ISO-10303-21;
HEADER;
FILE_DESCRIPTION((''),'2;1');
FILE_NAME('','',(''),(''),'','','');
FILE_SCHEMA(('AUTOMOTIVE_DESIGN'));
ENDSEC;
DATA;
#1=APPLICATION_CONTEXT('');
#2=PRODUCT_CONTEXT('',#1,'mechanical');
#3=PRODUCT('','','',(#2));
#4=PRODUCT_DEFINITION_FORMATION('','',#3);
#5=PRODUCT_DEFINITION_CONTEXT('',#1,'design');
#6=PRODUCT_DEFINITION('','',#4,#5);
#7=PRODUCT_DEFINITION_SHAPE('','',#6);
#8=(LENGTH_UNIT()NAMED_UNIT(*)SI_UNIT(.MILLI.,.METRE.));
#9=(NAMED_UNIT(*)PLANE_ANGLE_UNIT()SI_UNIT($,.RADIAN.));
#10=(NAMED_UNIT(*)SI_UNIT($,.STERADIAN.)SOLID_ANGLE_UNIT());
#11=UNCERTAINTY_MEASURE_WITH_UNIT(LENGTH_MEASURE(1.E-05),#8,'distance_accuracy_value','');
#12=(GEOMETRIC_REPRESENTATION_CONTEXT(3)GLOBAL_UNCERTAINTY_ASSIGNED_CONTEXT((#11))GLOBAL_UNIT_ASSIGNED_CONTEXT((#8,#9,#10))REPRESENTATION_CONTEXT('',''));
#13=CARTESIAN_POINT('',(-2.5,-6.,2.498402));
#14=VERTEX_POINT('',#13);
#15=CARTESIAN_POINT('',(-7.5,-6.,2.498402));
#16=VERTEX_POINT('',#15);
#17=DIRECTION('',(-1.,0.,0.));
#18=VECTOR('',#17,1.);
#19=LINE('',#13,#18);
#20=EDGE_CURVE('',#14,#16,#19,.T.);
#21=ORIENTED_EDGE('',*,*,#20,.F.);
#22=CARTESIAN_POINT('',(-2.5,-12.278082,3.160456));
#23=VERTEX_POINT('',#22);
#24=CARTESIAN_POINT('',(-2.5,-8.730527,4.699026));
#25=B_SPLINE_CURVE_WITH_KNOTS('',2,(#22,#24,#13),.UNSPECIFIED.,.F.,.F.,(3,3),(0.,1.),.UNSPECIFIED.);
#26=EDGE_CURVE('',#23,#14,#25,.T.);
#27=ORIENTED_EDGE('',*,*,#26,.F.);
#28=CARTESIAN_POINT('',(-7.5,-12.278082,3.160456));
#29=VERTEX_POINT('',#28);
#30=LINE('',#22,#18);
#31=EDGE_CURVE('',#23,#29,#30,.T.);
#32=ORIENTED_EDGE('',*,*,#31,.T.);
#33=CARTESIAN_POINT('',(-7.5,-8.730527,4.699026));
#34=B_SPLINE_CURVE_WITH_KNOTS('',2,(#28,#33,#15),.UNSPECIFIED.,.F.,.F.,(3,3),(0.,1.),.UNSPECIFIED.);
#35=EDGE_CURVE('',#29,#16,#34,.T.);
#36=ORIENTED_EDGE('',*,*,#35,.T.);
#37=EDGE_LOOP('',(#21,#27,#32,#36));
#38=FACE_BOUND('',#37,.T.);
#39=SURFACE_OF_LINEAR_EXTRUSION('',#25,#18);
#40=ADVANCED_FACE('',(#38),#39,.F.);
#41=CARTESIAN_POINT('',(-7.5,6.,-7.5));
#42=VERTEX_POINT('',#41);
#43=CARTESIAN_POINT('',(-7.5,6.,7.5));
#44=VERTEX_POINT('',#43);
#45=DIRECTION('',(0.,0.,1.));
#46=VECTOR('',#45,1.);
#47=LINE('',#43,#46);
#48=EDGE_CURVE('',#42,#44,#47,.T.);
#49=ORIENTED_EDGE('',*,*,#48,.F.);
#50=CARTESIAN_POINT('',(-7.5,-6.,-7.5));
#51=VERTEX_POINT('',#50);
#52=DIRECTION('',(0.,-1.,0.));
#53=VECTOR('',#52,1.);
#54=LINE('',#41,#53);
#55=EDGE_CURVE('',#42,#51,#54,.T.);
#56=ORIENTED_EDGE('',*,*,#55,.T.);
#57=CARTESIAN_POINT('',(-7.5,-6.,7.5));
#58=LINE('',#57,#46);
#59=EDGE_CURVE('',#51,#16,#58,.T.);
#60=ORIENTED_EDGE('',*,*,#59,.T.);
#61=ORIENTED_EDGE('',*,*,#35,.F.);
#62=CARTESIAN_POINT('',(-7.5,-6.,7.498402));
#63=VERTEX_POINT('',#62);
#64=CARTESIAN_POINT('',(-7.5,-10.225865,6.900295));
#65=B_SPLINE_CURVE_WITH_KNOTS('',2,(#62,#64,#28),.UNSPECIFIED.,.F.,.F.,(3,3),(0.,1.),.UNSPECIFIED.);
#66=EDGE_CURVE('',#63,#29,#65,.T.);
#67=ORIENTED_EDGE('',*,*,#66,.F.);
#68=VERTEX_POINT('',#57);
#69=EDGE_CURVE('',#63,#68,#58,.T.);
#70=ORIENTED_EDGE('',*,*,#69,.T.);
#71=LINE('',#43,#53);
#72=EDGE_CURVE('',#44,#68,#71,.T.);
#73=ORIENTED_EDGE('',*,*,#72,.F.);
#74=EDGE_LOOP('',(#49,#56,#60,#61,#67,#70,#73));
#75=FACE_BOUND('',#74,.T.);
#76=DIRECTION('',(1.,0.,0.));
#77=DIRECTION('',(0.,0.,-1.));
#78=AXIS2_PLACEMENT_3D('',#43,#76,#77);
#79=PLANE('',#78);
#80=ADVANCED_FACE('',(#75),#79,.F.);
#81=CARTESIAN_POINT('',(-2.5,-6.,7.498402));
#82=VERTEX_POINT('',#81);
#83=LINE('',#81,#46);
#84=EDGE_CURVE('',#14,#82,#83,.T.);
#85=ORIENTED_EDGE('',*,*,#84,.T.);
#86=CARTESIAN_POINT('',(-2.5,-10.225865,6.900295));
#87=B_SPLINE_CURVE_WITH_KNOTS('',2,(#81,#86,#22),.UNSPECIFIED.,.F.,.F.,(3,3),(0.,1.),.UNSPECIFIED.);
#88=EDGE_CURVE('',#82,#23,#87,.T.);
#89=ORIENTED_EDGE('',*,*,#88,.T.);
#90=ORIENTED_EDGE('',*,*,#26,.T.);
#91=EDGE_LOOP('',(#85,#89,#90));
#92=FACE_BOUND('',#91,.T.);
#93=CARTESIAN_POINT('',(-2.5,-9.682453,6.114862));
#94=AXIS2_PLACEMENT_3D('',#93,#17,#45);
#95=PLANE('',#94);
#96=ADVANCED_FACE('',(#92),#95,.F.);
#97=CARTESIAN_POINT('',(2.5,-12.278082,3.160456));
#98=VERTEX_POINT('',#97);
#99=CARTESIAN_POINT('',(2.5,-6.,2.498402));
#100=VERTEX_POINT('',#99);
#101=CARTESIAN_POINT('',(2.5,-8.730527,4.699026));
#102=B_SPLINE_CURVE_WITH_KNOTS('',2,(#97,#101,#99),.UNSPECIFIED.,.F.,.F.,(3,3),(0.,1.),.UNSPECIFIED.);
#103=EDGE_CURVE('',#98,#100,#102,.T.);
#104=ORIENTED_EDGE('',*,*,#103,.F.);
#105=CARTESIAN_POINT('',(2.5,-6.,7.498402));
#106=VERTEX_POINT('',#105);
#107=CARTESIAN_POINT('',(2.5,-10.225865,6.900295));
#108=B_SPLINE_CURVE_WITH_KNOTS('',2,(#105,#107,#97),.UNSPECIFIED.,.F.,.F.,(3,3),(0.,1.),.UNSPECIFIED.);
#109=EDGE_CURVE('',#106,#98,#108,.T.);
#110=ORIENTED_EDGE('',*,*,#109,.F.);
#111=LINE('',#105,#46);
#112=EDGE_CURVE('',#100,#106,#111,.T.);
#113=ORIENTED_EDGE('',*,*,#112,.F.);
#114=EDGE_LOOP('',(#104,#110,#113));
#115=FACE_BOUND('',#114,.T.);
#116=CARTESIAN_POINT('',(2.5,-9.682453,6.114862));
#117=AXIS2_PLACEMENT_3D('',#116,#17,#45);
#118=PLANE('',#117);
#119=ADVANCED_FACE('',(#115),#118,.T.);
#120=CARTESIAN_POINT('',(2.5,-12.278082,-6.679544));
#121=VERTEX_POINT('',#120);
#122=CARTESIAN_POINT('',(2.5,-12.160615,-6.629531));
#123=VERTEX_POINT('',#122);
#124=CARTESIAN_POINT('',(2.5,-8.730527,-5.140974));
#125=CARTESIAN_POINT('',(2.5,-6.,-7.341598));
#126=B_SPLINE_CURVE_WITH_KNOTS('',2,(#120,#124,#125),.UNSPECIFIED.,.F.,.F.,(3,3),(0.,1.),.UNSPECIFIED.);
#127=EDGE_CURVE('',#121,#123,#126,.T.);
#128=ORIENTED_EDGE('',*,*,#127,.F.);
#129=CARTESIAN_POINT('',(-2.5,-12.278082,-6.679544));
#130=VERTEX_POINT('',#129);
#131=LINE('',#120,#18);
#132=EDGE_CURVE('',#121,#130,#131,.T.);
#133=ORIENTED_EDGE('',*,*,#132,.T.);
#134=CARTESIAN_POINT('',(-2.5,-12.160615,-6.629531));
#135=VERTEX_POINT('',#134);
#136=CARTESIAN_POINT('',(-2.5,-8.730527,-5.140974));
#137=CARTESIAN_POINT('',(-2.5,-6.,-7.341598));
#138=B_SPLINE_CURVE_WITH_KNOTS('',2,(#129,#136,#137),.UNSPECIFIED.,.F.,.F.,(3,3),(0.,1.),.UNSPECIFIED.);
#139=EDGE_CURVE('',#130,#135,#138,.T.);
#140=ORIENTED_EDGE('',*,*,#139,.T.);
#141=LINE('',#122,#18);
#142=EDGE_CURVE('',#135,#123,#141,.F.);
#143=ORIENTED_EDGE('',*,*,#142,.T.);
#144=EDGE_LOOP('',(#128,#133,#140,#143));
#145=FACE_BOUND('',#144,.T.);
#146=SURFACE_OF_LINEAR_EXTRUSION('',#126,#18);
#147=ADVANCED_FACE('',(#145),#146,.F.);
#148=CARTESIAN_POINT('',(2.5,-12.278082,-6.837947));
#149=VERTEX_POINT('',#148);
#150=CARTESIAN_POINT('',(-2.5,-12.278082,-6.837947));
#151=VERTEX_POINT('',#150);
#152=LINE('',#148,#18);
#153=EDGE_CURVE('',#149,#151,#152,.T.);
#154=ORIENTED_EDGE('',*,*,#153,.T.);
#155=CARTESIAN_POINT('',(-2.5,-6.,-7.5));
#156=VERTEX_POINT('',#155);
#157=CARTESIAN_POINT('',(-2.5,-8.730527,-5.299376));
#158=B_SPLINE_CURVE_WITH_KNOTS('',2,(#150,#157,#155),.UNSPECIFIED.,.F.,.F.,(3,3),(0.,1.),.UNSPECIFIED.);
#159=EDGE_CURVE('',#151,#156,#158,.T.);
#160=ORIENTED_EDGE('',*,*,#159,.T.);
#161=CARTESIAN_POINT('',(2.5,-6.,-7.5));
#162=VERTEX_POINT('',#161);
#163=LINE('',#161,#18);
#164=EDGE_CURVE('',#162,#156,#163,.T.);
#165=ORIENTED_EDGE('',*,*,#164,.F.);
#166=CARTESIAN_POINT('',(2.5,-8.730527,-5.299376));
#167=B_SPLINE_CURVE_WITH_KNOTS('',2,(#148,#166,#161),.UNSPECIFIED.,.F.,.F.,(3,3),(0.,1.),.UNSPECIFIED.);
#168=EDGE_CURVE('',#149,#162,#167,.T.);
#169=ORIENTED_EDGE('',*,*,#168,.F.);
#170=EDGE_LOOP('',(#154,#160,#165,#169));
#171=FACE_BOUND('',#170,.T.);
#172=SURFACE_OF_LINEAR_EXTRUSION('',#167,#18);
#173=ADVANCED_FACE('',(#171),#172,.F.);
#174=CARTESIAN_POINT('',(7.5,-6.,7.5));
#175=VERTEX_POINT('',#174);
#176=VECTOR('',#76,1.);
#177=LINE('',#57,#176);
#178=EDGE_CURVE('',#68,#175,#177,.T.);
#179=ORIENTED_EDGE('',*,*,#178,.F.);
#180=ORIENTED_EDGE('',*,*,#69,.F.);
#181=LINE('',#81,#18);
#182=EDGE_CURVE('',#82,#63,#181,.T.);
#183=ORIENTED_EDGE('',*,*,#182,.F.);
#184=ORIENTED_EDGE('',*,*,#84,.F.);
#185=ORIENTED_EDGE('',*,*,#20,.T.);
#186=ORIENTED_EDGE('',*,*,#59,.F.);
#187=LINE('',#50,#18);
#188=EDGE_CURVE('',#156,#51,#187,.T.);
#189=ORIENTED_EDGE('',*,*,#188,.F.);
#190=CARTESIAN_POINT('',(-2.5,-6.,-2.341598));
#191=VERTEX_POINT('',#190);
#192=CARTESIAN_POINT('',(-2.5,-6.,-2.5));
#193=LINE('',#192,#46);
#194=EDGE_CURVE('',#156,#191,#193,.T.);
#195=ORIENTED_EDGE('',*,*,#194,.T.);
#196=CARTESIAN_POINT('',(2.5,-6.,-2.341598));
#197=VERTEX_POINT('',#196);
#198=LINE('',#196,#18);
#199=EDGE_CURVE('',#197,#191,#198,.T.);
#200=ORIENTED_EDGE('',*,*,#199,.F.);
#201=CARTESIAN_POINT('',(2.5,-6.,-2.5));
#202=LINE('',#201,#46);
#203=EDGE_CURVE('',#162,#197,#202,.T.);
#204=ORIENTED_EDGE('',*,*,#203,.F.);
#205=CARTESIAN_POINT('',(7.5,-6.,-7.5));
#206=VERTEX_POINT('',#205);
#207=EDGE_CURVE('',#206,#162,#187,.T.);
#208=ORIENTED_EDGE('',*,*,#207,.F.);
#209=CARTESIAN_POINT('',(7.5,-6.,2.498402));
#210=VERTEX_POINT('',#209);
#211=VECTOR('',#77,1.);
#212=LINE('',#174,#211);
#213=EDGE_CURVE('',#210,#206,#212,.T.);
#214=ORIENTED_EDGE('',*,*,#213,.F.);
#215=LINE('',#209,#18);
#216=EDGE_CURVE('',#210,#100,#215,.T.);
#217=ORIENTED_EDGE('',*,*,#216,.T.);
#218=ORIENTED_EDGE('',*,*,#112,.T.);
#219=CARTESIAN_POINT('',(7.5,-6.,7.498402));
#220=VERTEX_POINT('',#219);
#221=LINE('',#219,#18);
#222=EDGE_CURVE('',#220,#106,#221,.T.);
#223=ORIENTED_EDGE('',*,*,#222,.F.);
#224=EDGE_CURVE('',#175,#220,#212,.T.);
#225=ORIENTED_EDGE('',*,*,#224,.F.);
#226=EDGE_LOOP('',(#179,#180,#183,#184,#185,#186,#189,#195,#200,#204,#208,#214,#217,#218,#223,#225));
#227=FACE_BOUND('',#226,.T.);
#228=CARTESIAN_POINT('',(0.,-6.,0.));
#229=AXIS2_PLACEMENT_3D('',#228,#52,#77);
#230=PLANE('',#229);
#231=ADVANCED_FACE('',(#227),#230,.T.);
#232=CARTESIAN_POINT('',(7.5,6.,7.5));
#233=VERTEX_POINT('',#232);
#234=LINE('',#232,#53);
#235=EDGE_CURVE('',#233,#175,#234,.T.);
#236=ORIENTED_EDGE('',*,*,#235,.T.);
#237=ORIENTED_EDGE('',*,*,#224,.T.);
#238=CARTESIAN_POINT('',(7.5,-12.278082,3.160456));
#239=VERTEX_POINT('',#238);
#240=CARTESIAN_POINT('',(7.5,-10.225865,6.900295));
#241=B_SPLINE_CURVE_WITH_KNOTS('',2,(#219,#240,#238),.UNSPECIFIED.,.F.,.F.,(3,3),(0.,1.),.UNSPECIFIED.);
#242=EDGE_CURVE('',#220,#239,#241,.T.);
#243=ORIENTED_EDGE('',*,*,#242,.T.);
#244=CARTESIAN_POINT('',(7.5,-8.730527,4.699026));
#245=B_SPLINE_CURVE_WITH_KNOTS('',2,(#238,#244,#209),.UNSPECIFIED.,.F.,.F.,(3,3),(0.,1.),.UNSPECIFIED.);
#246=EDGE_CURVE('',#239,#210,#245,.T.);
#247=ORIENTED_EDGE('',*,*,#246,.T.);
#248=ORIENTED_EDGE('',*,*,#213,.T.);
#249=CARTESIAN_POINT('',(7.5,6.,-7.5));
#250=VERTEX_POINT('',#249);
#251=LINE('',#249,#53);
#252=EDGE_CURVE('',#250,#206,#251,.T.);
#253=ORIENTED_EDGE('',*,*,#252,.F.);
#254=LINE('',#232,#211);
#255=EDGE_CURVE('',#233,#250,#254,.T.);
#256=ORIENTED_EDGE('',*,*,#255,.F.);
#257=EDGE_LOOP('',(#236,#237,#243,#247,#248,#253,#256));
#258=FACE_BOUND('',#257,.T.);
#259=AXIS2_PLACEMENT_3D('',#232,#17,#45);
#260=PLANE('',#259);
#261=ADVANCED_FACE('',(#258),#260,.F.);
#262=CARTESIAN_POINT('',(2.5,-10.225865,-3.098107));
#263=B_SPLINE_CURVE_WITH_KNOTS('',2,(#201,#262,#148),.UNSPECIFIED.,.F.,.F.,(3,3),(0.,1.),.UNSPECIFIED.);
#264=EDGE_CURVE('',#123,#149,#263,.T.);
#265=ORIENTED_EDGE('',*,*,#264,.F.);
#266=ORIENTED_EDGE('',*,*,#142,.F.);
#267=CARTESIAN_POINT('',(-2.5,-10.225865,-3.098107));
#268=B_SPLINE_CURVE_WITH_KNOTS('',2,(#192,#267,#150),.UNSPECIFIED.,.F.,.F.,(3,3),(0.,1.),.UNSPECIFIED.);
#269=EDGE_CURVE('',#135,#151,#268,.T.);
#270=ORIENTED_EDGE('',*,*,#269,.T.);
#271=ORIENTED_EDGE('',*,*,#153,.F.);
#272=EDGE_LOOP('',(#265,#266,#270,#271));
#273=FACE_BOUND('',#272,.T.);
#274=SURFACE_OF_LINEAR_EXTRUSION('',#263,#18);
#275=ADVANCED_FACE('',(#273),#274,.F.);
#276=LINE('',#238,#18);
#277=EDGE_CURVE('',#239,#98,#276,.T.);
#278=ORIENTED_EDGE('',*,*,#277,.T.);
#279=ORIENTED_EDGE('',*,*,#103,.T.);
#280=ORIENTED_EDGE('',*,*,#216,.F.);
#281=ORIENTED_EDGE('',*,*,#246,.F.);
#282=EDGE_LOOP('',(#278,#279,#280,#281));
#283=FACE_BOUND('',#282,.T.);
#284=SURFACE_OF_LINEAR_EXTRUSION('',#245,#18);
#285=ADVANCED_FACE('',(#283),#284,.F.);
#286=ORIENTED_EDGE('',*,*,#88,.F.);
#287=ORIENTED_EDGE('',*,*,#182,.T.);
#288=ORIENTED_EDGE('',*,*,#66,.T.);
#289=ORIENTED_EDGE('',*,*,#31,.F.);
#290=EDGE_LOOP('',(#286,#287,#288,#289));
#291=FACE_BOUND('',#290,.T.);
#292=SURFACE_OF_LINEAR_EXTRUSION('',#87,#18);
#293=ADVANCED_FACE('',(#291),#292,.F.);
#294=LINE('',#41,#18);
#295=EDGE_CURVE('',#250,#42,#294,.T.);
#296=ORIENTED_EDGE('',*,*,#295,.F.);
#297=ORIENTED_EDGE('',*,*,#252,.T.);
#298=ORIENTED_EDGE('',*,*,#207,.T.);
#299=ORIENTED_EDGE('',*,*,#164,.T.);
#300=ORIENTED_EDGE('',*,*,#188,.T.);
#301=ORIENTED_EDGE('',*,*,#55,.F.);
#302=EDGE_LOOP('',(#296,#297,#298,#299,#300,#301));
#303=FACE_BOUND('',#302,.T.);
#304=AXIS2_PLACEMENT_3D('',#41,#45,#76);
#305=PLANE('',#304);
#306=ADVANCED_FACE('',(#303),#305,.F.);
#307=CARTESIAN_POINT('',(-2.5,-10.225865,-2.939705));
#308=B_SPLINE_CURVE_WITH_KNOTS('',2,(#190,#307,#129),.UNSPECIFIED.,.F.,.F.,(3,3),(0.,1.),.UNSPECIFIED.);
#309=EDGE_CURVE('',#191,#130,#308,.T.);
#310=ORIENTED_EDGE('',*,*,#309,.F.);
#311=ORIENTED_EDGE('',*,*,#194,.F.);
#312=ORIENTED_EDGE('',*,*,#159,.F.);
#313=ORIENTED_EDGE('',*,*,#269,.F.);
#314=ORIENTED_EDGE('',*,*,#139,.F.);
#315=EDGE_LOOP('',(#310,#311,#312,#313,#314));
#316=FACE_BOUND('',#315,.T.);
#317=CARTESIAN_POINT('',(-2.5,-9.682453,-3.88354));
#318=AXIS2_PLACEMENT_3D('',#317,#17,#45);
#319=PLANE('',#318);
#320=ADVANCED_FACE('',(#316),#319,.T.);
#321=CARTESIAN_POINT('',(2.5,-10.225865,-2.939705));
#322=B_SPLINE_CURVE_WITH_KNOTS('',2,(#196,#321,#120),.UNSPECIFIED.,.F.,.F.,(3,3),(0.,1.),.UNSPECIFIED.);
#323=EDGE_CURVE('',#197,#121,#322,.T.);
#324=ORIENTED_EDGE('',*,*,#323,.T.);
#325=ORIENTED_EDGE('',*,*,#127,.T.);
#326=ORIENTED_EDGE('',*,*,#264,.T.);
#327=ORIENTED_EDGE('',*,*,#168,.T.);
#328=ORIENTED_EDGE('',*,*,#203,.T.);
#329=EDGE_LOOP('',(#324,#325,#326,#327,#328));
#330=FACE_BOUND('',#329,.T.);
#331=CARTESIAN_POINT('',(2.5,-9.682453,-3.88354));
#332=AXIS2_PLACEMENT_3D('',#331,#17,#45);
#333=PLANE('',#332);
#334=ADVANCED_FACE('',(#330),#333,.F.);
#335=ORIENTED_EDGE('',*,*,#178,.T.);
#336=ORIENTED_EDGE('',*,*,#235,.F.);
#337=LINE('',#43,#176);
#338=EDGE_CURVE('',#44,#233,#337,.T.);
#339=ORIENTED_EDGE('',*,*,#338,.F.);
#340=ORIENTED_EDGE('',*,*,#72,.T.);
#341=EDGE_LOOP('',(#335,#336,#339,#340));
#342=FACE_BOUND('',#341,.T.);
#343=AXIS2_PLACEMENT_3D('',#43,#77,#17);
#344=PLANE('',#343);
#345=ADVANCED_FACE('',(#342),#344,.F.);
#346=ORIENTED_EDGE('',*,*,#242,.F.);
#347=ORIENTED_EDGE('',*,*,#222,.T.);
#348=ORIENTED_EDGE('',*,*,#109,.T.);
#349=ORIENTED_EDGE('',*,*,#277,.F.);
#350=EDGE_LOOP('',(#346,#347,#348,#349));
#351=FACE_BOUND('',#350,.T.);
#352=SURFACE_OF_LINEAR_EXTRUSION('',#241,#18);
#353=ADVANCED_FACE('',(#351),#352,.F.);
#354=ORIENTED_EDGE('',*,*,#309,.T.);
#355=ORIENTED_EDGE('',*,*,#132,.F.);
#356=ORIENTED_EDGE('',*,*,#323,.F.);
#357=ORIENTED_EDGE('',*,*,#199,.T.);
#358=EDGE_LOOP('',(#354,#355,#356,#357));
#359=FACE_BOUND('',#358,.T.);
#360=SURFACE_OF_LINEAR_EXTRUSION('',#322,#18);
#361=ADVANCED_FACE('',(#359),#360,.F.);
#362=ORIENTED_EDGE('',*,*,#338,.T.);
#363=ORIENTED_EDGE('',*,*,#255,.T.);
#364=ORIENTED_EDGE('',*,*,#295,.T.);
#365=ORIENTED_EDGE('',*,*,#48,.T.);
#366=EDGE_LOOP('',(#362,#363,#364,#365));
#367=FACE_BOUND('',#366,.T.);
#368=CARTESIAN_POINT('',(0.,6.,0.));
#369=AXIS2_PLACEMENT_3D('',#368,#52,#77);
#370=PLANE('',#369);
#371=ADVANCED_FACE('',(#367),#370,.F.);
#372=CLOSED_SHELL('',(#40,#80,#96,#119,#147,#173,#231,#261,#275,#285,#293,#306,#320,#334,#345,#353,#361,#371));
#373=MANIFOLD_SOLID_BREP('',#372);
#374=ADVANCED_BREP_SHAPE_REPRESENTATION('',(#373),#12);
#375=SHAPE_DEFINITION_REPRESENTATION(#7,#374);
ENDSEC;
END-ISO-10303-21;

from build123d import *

# Parameters (mm, degrees)
SKETCH_1_W               = 15
SKETCH_1_H               = 15
EXTRUDE_1_DEPTH          = 6
EXTRUDE_2_DEPTH          = 2.5
PATTERN_START            = -7.5
PATTERN_SKETCH_2_DEPTH   = 5
PATTERN_START_2          = 2.5
PATTERN_SKETCH_2_2_DEPTH = 5
PATTERN_START_3          = -2.5
PATTERN_SKETCH_2_3_DEPTH = 5


# Read off the part's stored shape, not the designer's step: 스케치 패턴2
with BuildPart() as part:
    # 스케치1 → 보스-돌출1 (new, symmetric)
    with BuildSketch(Plane(origin=(0, 0, 0), x_dir=(1, 0, 0), z_dir=(0, 1, 0))):
        Rectangle(SKETCH_1_W, SKETCH_1_H)
    extrude(amount=EXTRUDE_1_DEPTH, both=True)

    # 스케치3 → 보스-돌출2 (add, symmetric)
    with BuildSketch(Plane(origin=(0, 0, 0), x_dir=(0, 0, -1), z_dir=(1, 0, 0))):
        with BuildLine():
            Line((2.5, -6), (7.5, -6))
            add(Edge.make_bspline(
                [(6.837946582, -12.278081575), (5.299376428, -8.730527415), (7.5, -6)],
                knots=[0, 0, 0, 1, 1, 1], degree=2))
            add(Edge.make_bspline(
                [(2.5, -6), (3.098107293, -10.225865232), (6.837946582, -12.278081575)],
                knots=[0, 0, 0, 1, 1, 1], degree=2))
        make_face()
    extrude(amount=EXTRUDE_2_DEPTH, both=True)

    # 스케치 패턴2 outline → 스케치 패턴2 (add)
    with BuildSketch(Plane.YZ.offset(PATTERN_START)):
        with BuildLine():
            add(Edge.make_bspline(
                [(-12.278081575, 3.16045553), (-8.730527415, 4.699025684), (-6, 2.498402112)],
                knots=[0, 0, 0, 1, 1, 1], degree=2))
            Line((-6, 2.498402112), (-6, 7.498402112))
            add(Edge.make_bspline(
                [(-6, 7.498402112), (-10.225865232, 6.900294818), (-12.278081575, 3.16045553)],
                knots=[0, 0, 0, 1, 1, 1], degree=2))
        make_face()
    extrude(amount=PATTERN_SKETCH_2_DEPTH)

    # Pattern Sketch 2 2 outline → Pattern Sketch 2 2 (add)
    with BuildSketch(Plane.YZ.offset(PATTERN_START_2)):
        with BuildLine():
            add(Edge.make_bspline(
                [(-12.278081575, 3.16045553), (-8.730527415, 4.699025684), (-6, 2.498402112)],
                knots=[0, 0, 0, 1, 1, 1], degree=2))
            Line((-6, 2.498402112), (-6, 7.498402112))
            add(Edge.make_bspline(
                [(-6, 7.498402112), (-10.225865232, 6.900294818), (-12.278081575, 3.16045553)],
                knots=[0, 0, 0, 1, 1, 1], degree=2))
        make_face()
    extrude(amount=PATTERN_SKETCH_2_2_DEPTH)

    # Pattern Sketch 2 3 outline → Pattern Sketch 2 3 (add)
    with BuildSketch(Plane.YZ.offset(PATTERN_START_3)):
        with BuildLine():
            add(Edge.make_bspline(
                [(-6, -2.341597888), (-10.225865232, -2.939705182), (-12.278081575, -6.67954447)],
                knots=[0, 0, 0, 1, 1, 1], degree=2))
            add(Edge.make_bspline(
                [(-12.278081575, -6.67954447), (-12.219236087, -6.65402325), (-12.160615404, -6.629530866)],
                knots=[0, 0, 0, 0.016587622, 0.016587622, 0.016587622], degree=2))
            add(Edge.make_bspline(
                [(-6, -2.5), (-10.106703233, -3.081241715), (-12.160615404, -6.629530866)],
                knots=[0, 0, 0, 0.971801751, 0.971801751, 0.971801751], degree=2))
            Line((-6, -2.5), (-6, -2.341597888))
        make_face()
    extrude(amount=PATTERN_SKETCH_2_3_DEPTH)


solid = part.part
